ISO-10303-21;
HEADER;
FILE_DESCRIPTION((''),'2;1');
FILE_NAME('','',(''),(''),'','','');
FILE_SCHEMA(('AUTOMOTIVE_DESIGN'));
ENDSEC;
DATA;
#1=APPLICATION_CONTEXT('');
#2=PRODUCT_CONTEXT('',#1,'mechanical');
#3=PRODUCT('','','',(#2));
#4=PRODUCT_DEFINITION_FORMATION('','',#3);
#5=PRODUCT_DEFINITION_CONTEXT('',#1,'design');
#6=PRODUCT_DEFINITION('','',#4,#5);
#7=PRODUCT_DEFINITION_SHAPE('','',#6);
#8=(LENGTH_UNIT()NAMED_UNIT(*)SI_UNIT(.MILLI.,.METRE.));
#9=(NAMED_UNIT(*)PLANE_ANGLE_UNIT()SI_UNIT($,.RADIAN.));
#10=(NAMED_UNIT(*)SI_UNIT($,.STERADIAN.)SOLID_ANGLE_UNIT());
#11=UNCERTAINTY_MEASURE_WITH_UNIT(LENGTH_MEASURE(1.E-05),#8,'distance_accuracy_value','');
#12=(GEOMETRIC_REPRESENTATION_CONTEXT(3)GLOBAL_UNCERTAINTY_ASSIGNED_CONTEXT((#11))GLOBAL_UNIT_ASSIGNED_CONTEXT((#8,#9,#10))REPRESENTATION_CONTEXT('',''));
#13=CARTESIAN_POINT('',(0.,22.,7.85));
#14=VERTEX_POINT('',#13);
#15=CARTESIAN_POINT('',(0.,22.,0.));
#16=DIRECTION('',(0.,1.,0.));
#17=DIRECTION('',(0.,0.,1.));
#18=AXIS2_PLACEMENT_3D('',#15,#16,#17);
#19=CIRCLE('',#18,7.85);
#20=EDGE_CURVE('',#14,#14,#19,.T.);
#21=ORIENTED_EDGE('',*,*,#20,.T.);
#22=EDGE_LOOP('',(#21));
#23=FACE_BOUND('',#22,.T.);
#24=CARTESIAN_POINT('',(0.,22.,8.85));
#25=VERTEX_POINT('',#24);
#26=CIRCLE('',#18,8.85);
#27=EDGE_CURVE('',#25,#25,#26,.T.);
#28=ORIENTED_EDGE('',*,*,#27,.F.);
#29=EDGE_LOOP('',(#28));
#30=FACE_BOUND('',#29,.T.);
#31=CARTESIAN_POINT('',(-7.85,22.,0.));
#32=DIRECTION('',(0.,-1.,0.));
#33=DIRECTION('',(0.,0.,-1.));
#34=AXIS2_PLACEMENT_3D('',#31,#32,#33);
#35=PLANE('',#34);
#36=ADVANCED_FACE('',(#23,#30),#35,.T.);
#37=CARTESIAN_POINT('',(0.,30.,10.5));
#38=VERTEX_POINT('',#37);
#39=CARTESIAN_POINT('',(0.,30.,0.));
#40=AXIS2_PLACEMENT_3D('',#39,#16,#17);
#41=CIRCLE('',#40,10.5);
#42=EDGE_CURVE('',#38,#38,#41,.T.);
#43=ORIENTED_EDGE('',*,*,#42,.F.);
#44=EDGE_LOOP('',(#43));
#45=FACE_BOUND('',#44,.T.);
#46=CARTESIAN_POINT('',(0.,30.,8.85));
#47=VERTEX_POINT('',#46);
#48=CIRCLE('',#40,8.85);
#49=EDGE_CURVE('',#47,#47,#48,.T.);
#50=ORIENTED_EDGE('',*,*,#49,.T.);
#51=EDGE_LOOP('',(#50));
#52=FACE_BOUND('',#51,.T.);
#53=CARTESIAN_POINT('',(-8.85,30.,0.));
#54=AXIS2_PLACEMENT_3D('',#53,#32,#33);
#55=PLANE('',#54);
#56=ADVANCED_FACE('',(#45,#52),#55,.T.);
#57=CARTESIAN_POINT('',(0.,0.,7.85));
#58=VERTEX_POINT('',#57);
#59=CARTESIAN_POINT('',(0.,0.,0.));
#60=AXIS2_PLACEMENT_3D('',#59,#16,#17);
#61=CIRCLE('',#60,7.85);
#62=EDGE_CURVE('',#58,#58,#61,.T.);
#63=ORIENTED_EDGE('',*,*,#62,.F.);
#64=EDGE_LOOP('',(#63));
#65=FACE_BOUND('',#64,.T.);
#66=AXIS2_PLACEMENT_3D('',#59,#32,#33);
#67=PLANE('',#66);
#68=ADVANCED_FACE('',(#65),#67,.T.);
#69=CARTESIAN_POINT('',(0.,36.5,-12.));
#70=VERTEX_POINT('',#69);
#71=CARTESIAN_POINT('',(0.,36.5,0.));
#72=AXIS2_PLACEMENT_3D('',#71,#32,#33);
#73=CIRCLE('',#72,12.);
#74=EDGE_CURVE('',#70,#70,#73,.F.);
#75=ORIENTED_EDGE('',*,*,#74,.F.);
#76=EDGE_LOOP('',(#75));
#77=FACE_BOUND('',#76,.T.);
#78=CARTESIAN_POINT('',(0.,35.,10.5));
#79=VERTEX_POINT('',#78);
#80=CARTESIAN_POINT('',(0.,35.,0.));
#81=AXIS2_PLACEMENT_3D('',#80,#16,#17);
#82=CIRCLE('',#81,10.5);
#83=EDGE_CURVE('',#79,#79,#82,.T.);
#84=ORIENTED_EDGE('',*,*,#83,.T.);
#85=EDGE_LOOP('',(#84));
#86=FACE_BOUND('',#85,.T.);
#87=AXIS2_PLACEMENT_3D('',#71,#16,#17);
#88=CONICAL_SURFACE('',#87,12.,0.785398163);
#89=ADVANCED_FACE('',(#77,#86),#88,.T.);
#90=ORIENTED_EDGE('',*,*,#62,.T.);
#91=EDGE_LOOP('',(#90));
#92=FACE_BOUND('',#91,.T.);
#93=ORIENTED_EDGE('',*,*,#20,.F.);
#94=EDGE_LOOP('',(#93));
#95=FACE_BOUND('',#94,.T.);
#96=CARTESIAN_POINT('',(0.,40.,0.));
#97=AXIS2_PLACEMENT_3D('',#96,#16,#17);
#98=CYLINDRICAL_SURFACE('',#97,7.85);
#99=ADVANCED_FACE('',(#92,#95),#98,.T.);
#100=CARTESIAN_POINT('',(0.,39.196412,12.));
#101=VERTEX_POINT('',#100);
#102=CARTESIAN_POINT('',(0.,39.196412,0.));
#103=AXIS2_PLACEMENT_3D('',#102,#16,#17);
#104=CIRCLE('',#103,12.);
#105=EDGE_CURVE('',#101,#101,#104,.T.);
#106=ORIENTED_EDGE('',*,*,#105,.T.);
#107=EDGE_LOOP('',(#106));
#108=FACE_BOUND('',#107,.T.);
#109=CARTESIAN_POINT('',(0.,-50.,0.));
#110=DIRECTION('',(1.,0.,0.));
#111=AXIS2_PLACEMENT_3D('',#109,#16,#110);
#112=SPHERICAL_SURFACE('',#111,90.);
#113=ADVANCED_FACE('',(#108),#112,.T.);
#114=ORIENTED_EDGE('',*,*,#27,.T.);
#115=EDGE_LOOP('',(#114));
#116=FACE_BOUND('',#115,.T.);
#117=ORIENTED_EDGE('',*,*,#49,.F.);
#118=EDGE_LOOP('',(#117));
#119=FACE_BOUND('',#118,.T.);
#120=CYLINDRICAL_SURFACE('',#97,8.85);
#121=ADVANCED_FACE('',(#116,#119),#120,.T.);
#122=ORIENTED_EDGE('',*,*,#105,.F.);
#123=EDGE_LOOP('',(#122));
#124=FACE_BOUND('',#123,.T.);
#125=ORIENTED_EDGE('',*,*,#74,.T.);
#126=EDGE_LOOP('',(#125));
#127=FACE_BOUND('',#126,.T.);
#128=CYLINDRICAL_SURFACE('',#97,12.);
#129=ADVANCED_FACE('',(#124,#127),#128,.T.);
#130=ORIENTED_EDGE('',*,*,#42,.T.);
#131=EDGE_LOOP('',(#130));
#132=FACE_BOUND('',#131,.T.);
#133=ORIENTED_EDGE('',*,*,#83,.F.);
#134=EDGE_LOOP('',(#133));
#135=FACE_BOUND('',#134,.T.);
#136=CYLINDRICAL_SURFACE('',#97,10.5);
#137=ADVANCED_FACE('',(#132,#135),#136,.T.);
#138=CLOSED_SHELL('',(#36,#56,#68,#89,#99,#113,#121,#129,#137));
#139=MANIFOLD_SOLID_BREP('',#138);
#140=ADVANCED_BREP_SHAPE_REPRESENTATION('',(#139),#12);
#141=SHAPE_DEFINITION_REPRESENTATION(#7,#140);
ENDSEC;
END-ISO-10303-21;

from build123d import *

# Parameters (mm, degrees)
CHAMFER_1_SIZE = 1.5


with BuildPart() as part:
    # 草图1 → 旋转1 (revolve)
    with BuildSketch(Plane.XY, mode=Mode.PRIVATE) as revolve_1_sk:
        with BuildLine():
            Line((0, 0), (-7.85, 0))
            Line((-7.85, 0), (-7.85, 22))
            Line((-7.85, 22), (-8.85, 22))
            Line((-8.85, 22), (-8.85, 30))
            Line((-8.85, 30), (-10.5, 30))
            Line((-10.5, 30), (-10.5, 35))
            Line((-10.5, 35), (-12, 35))
            Line((-12, 35), (-12, 39.196412484))
            ThreePointArc((-12, 39.196412484), (-6.013438137, 39.798878399), (0, 40))
            Line((0, 40), (0, 0))
        make_face()
    revolve(revolve_1_sk.sketch.rotate(Axis((0, 40, 0), (0, -1, 0)), 270), axis=Axis((0, 40, 0), (0, -1, 0)))

    # 倒角1
    chamfer_1_edges = [part.edges().sort_by_distance(p)[0] for p in [
        (0, 35, -12),
    ]]
    chamfer(chamfer_1_edges, length=CHAMFER_1_SIZE - 0.0001)  # a hair under: the kernel refuses the full size


solid = part.part
